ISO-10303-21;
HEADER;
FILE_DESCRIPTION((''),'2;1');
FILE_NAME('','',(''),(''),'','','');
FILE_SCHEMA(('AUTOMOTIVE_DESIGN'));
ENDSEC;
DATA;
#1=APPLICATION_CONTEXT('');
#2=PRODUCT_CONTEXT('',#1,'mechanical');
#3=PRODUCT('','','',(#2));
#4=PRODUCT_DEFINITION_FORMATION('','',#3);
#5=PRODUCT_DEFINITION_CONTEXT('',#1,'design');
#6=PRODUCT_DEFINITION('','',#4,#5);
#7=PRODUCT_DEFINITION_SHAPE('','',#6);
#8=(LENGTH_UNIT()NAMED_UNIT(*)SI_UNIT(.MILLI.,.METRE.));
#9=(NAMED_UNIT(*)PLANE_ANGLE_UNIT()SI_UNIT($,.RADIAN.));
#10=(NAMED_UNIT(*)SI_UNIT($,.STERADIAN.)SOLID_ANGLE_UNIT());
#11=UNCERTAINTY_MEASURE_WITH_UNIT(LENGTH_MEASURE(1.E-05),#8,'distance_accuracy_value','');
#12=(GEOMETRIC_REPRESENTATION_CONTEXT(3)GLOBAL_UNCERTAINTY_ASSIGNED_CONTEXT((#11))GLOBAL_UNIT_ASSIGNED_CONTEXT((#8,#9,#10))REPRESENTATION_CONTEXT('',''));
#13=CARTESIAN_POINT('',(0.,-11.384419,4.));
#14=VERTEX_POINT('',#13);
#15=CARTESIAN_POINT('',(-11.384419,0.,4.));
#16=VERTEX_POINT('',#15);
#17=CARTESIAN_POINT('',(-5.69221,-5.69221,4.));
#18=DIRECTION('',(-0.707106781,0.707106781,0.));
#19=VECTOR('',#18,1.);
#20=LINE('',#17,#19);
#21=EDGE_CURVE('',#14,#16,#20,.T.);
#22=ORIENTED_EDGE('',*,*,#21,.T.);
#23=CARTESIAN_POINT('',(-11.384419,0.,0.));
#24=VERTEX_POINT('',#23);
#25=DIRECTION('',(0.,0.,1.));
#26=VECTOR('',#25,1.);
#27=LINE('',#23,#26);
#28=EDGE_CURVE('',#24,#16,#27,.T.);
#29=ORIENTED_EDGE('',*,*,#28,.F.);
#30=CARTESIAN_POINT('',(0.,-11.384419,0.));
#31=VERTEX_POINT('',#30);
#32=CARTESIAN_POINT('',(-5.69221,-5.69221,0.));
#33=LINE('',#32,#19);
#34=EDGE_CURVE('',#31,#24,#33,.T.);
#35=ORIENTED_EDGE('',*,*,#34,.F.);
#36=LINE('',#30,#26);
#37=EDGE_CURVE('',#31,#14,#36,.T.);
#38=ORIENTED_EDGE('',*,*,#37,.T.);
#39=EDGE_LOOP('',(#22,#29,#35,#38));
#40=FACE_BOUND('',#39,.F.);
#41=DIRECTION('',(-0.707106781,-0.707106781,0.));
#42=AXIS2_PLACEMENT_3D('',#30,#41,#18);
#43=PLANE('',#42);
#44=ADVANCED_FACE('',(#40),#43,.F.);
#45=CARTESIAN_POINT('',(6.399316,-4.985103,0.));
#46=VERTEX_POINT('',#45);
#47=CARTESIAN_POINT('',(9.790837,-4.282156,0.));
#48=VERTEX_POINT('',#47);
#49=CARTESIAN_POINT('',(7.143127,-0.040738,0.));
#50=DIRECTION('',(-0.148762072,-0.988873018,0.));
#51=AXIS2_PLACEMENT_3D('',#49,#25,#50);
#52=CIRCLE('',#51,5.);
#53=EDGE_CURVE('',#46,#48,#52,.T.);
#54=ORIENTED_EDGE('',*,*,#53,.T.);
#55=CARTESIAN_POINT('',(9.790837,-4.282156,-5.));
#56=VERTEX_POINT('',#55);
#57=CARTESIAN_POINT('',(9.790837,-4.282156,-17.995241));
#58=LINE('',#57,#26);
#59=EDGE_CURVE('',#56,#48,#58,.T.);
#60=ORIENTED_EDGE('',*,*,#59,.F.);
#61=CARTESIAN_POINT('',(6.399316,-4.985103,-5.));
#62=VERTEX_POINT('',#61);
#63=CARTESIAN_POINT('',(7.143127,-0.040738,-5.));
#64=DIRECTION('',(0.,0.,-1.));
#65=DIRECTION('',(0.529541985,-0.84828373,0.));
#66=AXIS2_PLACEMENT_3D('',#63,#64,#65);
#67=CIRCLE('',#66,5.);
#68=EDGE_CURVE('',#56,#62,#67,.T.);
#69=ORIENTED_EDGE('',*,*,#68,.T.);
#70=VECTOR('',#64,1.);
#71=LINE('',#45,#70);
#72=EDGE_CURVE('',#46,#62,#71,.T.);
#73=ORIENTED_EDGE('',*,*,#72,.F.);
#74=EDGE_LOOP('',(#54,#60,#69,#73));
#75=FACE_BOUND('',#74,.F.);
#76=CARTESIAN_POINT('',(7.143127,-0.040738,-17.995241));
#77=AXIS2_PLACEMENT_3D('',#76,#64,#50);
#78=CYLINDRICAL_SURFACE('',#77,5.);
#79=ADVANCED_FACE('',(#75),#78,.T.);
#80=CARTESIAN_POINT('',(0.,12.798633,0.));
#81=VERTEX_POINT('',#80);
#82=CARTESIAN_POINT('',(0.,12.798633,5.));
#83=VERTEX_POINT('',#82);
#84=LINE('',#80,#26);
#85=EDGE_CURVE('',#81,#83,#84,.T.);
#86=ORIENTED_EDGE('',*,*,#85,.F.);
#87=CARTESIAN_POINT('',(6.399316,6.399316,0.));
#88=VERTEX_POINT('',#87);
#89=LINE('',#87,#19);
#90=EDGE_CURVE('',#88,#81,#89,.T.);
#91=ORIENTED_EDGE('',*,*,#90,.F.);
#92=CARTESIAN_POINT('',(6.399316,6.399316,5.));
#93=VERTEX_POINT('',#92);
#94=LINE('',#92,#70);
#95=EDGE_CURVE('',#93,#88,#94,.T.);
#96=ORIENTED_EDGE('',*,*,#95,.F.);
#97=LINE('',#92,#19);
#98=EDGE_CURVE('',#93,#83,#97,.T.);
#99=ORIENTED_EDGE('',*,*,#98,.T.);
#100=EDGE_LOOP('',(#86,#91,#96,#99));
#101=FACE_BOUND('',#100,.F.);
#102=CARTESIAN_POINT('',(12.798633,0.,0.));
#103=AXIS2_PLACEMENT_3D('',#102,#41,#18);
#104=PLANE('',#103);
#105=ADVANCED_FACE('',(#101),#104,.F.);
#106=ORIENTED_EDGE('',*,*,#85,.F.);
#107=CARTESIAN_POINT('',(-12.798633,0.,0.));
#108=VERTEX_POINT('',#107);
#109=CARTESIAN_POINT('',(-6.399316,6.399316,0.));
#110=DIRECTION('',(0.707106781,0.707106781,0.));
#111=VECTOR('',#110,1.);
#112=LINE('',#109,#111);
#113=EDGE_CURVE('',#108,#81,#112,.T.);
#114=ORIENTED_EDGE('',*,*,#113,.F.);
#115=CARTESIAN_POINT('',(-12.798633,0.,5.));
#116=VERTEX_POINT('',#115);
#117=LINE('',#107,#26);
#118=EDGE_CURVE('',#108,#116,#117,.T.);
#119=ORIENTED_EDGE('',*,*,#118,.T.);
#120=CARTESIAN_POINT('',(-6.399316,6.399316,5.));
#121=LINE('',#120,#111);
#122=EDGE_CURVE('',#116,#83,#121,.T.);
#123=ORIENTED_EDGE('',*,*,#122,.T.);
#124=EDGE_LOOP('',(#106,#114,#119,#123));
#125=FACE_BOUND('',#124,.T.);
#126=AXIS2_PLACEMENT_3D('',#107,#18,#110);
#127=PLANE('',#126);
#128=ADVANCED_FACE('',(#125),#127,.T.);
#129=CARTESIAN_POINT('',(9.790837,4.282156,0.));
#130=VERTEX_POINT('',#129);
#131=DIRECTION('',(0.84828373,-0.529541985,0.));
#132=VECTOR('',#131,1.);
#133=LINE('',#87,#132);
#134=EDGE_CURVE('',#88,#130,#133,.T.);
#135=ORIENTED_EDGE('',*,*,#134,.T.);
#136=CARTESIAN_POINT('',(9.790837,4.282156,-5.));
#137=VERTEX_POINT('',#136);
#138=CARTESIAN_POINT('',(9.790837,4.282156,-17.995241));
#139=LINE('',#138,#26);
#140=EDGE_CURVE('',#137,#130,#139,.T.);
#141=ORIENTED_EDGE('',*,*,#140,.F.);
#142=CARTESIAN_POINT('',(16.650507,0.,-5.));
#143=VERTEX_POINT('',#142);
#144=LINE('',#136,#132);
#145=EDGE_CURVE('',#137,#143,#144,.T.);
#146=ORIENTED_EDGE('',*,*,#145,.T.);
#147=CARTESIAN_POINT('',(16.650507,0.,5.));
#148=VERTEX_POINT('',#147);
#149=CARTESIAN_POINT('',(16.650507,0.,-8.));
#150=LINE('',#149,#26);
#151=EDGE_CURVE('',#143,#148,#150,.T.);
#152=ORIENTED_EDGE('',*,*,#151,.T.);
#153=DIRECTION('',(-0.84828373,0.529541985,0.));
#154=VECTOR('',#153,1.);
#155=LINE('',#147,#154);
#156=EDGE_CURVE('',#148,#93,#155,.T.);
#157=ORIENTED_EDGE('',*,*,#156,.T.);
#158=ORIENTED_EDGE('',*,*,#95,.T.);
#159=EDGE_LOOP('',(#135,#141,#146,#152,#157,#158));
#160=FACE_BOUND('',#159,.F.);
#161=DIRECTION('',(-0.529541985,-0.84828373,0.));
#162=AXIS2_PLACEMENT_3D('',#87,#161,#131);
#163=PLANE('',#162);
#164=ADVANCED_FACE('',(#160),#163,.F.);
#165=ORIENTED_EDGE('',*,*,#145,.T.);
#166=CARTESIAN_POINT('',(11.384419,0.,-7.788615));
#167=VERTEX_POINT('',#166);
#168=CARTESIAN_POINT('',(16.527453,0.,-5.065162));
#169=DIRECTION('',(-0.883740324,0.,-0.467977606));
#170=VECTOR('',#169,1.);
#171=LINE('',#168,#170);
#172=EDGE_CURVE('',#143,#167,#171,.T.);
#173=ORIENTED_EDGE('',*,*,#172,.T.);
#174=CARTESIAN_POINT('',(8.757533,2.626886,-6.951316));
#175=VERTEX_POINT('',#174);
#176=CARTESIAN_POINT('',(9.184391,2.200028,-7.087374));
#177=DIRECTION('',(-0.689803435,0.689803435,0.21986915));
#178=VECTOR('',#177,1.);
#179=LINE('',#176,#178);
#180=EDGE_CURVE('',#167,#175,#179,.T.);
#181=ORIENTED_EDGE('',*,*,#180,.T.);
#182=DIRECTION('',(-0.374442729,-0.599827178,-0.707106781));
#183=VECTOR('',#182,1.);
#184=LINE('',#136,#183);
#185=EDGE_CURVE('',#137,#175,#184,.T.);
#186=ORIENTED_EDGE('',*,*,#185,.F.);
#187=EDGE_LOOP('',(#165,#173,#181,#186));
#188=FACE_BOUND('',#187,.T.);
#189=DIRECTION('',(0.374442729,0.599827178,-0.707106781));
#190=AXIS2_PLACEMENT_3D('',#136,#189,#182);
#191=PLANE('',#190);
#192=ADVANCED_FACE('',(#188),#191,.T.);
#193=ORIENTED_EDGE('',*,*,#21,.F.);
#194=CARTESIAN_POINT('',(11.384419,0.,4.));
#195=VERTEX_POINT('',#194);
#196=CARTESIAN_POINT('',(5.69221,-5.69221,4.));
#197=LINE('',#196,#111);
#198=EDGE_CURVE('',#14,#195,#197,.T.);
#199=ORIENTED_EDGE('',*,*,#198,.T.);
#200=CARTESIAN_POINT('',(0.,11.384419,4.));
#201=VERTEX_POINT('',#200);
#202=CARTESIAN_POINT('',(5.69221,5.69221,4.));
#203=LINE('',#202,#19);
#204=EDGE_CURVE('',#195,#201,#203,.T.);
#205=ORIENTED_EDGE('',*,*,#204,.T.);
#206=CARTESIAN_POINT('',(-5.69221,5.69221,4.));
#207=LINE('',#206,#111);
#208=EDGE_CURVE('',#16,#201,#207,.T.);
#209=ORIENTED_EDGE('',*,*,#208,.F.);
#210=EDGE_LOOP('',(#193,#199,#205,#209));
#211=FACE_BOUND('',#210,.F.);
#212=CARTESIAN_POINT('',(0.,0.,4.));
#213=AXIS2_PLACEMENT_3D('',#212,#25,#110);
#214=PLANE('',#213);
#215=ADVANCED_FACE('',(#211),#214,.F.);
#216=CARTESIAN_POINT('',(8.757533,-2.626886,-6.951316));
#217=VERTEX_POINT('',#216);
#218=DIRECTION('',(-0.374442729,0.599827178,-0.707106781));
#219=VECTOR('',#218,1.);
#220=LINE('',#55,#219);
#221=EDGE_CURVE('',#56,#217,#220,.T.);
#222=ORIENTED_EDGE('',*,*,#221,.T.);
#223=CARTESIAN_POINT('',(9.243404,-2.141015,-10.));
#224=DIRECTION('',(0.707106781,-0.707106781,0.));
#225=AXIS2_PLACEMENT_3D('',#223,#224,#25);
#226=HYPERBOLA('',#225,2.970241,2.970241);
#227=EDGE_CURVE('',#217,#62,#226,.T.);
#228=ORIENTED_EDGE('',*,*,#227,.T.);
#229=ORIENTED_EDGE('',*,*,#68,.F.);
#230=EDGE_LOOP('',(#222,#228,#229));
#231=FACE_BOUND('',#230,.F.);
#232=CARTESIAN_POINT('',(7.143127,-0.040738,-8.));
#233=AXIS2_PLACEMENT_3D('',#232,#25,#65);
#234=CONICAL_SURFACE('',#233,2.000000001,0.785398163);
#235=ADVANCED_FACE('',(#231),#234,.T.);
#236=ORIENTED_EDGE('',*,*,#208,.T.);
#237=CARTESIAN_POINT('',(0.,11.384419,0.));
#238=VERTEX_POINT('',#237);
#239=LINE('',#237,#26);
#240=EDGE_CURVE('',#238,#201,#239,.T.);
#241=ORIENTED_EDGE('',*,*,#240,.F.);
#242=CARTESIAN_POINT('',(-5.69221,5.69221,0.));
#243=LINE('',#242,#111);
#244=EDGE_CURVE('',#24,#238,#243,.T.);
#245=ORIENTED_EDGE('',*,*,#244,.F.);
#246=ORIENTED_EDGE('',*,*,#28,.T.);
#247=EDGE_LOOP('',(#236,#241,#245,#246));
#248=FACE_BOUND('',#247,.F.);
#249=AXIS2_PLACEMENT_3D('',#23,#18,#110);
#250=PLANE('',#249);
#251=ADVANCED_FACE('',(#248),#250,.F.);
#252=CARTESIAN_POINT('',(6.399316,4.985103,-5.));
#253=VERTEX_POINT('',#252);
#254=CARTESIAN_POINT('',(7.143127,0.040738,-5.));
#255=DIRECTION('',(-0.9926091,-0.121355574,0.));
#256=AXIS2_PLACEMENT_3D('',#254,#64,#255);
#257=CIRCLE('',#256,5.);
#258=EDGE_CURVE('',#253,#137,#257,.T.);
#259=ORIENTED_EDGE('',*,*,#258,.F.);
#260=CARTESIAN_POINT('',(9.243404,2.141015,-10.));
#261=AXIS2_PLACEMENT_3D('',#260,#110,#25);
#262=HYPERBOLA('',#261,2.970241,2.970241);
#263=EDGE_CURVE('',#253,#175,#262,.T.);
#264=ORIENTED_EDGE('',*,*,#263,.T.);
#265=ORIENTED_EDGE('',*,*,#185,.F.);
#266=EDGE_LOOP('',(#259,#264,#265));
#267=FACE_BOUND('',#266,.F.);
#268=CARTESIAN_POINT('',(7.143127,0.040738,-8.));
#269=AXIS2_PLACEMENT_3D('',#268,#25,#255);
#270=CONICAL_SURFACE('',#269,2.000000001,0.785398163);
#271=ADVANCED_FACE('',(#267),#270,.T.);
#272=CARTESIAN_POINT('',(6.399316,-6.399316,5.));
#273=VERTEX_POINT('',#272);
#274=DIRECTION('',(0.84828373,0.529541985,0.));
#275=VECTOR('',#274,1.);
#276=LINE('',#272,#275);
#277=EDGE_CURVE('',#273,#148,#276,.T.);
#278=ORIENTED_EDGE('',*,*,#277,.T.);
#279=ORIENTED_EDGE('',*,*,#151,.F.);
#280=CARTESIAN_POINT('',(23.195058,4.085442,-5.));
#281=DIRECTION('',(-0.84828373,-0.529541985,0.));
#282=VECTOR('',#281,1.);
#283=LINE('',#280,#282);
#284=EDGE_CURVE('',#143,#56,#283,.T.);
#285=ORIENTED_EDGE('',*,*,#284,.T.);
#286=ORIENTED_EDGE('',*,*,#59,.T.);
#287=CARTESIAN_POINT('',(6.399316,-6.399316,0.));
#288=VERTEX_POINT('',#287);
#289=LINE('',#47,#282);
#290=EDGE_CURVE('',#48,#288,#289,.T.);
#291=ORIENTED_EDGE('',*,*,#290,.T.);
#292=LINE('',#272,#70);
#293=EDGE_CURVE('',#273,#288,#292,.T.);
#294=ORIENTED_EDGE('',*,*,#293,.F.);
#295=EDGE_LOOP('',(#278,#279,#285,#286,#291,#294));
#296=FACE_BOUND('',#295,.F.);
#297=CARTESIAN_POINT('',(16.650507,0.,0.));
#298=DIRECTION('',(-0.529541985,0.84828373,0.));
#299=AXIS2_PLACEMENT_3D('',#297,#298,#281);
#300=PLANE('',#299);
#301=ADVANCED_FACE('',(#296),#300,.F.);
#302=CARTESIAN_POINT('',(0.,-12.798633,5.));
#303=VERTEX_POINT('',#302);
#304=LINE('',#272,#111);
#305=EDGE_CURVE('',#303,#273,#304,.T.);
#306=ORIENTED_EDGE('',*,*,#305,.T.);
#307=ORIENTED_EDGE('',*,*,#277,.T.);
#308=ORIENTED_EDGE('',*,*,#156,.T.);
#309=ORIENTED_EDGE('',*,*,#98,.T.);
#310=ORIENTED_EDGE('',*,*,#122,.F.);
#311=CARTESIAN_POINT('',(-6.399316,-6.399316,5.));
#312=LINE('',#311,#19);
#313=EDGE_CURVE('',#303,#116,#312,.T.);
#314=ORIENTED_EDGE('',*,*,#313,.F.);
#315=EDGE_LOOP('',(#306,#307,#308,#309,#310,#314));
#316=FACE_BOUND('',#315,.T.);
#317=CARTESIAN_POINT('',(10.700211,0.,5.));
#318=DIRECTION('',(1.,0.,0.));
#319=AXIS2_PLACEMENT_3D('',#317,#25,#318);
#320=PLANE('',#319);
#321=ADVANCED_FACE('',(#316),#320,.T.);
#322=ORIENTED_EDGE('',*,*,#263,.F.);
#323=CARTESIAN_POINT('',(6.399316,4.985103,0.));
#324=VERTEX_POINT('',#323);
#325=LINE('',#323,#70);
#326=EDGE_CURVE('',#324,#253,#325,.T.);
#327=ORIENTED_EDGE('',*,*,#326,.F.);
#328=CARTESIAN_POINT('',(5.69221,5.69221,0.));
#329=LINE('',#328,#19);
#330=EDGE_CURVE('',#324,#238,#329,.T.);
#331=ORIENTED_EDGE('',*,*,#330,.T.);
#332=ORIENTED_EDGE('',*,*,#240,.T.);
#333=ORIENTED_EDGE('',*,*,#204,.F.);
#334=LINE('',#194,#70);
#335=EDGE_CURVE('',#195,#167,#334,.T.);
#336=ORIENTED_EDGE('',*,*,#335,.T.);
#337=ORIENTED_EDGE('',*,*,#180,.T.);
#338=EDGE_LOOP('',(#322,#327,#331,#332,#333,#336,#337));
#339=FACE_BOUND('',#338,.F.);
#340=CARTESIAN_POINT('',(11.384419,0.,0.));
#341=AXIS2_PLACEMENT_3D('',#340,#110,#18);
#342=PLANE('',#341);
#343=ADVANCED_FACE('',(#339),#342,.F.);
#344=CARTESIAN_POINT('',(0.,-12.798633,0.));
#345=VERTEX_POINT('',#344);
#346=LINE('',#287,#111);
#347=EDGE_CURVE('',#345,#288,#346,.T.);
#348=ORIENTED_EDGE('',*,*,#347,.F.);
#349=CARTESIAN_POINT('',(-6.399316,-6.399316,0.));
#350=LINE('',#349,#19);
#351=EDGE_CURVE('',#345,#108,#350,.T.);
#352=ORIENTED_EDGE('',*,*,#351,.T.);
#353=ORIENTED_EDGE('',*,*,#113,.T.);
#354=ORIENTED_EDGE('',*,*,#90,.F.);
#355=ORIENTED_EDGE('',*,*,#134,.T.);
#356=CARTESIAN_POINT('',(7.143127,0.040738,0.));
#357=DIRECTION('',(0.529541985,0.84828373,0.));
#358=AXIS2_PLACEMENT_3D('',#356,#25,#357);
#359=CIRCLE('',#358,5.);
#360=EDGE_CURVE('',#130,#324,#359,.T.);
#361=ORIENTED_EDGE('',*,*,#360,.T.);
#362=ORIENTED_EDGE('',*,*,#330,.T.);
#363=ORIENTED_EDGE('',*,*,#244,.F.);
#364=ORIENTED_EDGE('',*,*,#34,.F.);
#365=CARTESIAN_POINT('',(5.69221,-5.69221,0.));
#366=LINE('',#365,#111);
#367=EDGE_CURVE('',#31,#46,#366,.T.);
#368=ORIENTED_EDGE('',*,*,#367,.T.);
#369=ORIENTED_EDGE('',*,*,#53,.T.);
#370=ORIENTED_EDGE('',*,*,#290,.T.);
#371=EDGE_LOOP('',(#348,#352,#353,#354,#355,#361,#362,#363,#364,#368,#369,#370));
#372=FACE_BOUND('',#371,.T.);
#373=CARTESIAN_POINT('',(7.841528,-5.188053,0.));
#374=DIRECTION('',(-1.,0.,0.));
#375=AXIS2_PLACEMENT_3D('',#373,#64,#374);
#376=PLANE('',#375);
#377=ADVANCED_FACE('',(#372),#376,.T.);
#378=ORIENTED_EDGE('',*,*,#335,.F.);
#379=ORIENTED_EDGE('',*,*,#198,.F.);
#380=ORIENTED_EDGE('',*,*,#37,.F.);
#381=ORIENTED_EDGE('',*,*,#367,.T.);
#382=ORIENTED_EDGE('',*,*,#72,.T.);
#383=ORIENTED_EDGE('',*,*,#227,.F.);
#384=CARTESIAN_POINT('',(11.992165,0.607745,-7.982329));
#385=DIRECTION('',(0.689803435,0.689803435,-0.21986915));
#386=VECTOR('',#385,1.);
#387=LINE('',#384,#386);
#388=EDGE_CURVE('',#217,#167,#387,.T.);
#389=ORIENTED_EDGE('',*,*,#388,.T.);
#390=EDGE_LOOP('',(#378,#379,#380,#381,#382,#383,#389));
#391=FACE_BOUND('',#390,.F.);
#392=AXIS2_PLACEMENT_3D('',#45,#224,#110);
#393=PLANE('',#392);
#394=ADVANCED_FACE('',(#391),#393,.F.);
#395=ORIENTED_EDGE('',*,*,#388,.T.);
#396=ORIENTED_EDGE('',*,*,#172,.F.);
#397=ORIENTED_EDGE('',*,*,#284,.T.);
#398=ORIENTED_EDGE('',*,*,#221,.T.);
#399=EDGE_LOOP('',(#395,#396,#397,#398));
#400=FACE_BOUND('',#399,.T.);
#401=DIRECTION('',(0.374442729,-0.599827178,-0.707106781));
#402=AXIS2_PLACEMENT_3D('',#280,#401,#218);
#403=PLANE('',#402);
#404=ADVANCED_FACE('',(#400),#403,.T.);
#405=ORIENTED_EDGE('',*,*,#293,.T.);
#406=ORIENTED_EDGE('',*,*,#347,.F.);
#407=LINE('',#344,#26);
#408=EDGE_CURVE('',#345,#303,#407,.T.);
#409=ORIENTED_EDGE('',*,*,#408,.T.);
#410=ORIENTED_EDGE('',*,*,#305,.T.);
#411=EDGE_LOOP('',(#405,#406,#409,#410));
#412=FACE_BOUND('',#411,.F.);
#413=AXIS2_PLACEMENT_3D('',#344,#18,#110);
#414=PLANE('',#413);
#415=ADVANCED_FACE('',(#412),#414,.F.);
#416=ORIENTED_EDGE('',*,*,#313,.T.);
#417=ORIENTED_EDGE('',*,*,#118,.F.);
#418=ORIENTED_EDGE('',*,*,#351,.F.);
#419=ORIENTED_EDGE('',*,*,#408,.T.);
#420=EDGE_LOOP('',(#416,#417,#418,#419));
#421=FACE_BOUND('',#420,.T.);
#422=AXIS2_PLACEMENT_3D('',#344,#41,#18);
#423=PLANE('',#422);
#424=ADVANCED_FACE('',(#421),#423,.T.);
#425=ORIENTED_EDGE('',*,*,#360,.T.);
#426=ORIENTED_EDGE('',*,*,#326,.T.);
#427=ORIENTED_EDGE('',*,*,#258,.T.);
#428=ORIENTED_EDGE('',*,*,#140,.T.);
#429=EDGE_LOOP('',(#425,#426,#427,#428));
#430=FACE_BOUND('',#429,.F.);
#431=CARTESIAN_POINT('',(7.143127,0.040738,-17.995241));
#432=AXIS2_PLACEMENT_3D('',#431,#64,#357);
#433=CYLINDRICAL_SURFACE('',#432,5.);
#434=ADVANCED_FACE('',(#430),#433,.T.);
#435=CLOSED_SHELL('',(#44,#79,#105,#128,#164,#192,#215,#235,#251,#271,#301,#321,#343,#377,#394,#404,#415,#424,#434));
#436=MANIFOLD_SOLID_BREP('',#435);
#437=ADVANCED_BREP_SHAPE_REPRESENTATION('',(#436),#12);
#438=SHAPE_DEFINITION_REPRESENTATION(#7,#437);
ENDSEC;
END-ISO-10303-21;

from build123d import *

# Parameters (mm, degrees)
F1_W         = 18.1
F1_H         = 18.1
F2_DEPTH     = 5
F3_W         = 16.1
F3_H         = 16.1
F4_DEPTH     = 4
F5_ANGLE     = 45
F7_DEPTH     = 5
F9_DEPTH     = 8
F10_T1_DEPTH = 17.995241473
F11_T1_DEPTH = 15.801577482
F11_T3_DEPTH = 15.801577482
F11_T6_ANGLE = 128.9448568851
F11_T8_ANGLE = 128.9448568851


# Not quite as in the source:
# - a fillet or chamfer that OpenCascade refuses, or shapes differently, is made with other operations: its cross-section is extruded or revolved along the edge and cut away or added


with BuildPart() as f2:
    # F1 (on Top) → F2 (new body)
    with BuildSketch(Plane.XY):
        Rectangle(F1_W, F1_H)
    extrude(amount=F2_DEPTH)

    # F3 (on Top) → F4 (cut)
    with BuildSketch(Plane.XY):
        Rectangle(F3_W, F3_H)
    extrude(amount=F4_DEPTH, mode=Mode.SUBTRACT)


with BuildPart() as f2_1:
    # F5: moved
    add(f2.part.rotate(Axis((0, 0, 23.8891355693), (0, 0, 1)), F5_ANGLE))

    # F6 (on face) → F7 (join)
    with BuildSketch(Plane.XY.offset(5)):
        Polygon((12.7986327395, 0), (6.3993163697, -6.3993163697), (16.6505072266, 0), (6.3993163697, 6.3993163697), align=None)
    extrude(amount=-F7_DEPTH)

    # F8 (on face) → F9 (join)
    with BuildSketch(Plane(origin=(0, 0, 0), x_dir=(1, 0, 0), z_dir=(0, 0, -1))):
        Polygon((16.6505072266, 0), (6.3993163697, 6.3993163697), (6.3993163697, 4.9851028074), (11.3844191771, 0), (6.3993163697, -4.9851028074), (6.3993163697, -6.3993163697), align=None)
    extrude(amount=F9_DEPTH)

    # F10: fillet of radius 5 on 2 edges, made by hand

    # F10_s2 → F10_t1 (cut)
    with BuildSketch(Plane.XY.offset(-17.995241473)):
        with BuildLine():
            ThreePointArc((6.3993163697, -4.9851028074), (8.1578886795, -4.9366807501), (9.7908366557, -4.2821563649))
            Line((9.7908366557, -4.2821563649), (6.3993163697, -6.3993163697))
            Line((6.3993163697, -6.3993163697), (6.3993163697, -4.9851028074))
        make_face()
        with BuildLine():
            ThreePointArc((9.7908366557, 4.2821563649), (8.1578886795, 4.9366807501), (6.3993163697, 4.9851028074))
            Line((6.3993163697, 4.9851028074), (6.3993163697, 6.3993163697))
            Line((6.3993163697, 6.3993163697), (9.7908366557, 4.2821563649))
        make_face()
    extrude(amount=F10_T1_DEPTH, mode=Mode.SUBTRACT)

    # F11: chamfer of 3 on 2 edges, made by hand

    # F11_s2 → F11_t1 (cut)
    with BuildSketch(Plane(origin=(5.1217894323, -3.1972822879, 0), x_dir=(0, 0, 1), z_dir=(0.8482837296, -0.5295419852, 0))):
        Polygon((-5, -8.8171426514), (-8, -5.8171426514), (-8, -8.8171426514), align=None)
    extrude(amount=F11_T1_DEPTH, mode=Mode.SUBTRACT)

    # F11_s4 → F11_t3 (cut)
    with BuildSketch(Plane(origin=(18.5260105123, 11.564880997, 0), x_dir=(0, 0, 1), z_dir=(-0.8482837296, -0.5295419852, 0))):
        Polygon((-5, -8.8171426514), (-8, -5.8171426514), (-8, -8.8171426514), align=None)
    extrude(amount=F11_T3_DEPTH, mode=Mode.SUBTRACT)

    # F11_s5 → F11_t6 (revolve, cut)
    with BuildSketch(Plane(origin=(5.1217894331, 3.1972822878, 0), x_dir=(0, 0, 1), z_dir=(0.8482837296, 0.5295419851, 0))):
        Polygon((-8, 5.8171426509), (-5, 8.8171426509), (-8, 8.8171426509), align=None)
    revolve(axis=Axis((7.1431267295, -0.0407377158, -8), (0, 0, -1)), revolution_arc=F11_T6_ANGLE, mode=Mode.SUBTRACT)

    # F11_s7 → F11_t8 (revolve, cut)
    with BuildSketch(Plane(origin=(0.1002908696, -0.8203136168, 0), x_dir=(0, 0, 1), z_dir=(0.1213555739, -0.9926090996, 0))):
        Polygon((-8, -5.0952763393), (-5, -2.0952763393), (-8, -2.0952763393), align=None)
    revolve(axis=Axis((7.1431267295, 0.0407377158, -8), (0, 0, -1)), revolution_arc=F11_T8_ANGLE, mode=Mode.SUBTRACT)


solid = f2_1.part
